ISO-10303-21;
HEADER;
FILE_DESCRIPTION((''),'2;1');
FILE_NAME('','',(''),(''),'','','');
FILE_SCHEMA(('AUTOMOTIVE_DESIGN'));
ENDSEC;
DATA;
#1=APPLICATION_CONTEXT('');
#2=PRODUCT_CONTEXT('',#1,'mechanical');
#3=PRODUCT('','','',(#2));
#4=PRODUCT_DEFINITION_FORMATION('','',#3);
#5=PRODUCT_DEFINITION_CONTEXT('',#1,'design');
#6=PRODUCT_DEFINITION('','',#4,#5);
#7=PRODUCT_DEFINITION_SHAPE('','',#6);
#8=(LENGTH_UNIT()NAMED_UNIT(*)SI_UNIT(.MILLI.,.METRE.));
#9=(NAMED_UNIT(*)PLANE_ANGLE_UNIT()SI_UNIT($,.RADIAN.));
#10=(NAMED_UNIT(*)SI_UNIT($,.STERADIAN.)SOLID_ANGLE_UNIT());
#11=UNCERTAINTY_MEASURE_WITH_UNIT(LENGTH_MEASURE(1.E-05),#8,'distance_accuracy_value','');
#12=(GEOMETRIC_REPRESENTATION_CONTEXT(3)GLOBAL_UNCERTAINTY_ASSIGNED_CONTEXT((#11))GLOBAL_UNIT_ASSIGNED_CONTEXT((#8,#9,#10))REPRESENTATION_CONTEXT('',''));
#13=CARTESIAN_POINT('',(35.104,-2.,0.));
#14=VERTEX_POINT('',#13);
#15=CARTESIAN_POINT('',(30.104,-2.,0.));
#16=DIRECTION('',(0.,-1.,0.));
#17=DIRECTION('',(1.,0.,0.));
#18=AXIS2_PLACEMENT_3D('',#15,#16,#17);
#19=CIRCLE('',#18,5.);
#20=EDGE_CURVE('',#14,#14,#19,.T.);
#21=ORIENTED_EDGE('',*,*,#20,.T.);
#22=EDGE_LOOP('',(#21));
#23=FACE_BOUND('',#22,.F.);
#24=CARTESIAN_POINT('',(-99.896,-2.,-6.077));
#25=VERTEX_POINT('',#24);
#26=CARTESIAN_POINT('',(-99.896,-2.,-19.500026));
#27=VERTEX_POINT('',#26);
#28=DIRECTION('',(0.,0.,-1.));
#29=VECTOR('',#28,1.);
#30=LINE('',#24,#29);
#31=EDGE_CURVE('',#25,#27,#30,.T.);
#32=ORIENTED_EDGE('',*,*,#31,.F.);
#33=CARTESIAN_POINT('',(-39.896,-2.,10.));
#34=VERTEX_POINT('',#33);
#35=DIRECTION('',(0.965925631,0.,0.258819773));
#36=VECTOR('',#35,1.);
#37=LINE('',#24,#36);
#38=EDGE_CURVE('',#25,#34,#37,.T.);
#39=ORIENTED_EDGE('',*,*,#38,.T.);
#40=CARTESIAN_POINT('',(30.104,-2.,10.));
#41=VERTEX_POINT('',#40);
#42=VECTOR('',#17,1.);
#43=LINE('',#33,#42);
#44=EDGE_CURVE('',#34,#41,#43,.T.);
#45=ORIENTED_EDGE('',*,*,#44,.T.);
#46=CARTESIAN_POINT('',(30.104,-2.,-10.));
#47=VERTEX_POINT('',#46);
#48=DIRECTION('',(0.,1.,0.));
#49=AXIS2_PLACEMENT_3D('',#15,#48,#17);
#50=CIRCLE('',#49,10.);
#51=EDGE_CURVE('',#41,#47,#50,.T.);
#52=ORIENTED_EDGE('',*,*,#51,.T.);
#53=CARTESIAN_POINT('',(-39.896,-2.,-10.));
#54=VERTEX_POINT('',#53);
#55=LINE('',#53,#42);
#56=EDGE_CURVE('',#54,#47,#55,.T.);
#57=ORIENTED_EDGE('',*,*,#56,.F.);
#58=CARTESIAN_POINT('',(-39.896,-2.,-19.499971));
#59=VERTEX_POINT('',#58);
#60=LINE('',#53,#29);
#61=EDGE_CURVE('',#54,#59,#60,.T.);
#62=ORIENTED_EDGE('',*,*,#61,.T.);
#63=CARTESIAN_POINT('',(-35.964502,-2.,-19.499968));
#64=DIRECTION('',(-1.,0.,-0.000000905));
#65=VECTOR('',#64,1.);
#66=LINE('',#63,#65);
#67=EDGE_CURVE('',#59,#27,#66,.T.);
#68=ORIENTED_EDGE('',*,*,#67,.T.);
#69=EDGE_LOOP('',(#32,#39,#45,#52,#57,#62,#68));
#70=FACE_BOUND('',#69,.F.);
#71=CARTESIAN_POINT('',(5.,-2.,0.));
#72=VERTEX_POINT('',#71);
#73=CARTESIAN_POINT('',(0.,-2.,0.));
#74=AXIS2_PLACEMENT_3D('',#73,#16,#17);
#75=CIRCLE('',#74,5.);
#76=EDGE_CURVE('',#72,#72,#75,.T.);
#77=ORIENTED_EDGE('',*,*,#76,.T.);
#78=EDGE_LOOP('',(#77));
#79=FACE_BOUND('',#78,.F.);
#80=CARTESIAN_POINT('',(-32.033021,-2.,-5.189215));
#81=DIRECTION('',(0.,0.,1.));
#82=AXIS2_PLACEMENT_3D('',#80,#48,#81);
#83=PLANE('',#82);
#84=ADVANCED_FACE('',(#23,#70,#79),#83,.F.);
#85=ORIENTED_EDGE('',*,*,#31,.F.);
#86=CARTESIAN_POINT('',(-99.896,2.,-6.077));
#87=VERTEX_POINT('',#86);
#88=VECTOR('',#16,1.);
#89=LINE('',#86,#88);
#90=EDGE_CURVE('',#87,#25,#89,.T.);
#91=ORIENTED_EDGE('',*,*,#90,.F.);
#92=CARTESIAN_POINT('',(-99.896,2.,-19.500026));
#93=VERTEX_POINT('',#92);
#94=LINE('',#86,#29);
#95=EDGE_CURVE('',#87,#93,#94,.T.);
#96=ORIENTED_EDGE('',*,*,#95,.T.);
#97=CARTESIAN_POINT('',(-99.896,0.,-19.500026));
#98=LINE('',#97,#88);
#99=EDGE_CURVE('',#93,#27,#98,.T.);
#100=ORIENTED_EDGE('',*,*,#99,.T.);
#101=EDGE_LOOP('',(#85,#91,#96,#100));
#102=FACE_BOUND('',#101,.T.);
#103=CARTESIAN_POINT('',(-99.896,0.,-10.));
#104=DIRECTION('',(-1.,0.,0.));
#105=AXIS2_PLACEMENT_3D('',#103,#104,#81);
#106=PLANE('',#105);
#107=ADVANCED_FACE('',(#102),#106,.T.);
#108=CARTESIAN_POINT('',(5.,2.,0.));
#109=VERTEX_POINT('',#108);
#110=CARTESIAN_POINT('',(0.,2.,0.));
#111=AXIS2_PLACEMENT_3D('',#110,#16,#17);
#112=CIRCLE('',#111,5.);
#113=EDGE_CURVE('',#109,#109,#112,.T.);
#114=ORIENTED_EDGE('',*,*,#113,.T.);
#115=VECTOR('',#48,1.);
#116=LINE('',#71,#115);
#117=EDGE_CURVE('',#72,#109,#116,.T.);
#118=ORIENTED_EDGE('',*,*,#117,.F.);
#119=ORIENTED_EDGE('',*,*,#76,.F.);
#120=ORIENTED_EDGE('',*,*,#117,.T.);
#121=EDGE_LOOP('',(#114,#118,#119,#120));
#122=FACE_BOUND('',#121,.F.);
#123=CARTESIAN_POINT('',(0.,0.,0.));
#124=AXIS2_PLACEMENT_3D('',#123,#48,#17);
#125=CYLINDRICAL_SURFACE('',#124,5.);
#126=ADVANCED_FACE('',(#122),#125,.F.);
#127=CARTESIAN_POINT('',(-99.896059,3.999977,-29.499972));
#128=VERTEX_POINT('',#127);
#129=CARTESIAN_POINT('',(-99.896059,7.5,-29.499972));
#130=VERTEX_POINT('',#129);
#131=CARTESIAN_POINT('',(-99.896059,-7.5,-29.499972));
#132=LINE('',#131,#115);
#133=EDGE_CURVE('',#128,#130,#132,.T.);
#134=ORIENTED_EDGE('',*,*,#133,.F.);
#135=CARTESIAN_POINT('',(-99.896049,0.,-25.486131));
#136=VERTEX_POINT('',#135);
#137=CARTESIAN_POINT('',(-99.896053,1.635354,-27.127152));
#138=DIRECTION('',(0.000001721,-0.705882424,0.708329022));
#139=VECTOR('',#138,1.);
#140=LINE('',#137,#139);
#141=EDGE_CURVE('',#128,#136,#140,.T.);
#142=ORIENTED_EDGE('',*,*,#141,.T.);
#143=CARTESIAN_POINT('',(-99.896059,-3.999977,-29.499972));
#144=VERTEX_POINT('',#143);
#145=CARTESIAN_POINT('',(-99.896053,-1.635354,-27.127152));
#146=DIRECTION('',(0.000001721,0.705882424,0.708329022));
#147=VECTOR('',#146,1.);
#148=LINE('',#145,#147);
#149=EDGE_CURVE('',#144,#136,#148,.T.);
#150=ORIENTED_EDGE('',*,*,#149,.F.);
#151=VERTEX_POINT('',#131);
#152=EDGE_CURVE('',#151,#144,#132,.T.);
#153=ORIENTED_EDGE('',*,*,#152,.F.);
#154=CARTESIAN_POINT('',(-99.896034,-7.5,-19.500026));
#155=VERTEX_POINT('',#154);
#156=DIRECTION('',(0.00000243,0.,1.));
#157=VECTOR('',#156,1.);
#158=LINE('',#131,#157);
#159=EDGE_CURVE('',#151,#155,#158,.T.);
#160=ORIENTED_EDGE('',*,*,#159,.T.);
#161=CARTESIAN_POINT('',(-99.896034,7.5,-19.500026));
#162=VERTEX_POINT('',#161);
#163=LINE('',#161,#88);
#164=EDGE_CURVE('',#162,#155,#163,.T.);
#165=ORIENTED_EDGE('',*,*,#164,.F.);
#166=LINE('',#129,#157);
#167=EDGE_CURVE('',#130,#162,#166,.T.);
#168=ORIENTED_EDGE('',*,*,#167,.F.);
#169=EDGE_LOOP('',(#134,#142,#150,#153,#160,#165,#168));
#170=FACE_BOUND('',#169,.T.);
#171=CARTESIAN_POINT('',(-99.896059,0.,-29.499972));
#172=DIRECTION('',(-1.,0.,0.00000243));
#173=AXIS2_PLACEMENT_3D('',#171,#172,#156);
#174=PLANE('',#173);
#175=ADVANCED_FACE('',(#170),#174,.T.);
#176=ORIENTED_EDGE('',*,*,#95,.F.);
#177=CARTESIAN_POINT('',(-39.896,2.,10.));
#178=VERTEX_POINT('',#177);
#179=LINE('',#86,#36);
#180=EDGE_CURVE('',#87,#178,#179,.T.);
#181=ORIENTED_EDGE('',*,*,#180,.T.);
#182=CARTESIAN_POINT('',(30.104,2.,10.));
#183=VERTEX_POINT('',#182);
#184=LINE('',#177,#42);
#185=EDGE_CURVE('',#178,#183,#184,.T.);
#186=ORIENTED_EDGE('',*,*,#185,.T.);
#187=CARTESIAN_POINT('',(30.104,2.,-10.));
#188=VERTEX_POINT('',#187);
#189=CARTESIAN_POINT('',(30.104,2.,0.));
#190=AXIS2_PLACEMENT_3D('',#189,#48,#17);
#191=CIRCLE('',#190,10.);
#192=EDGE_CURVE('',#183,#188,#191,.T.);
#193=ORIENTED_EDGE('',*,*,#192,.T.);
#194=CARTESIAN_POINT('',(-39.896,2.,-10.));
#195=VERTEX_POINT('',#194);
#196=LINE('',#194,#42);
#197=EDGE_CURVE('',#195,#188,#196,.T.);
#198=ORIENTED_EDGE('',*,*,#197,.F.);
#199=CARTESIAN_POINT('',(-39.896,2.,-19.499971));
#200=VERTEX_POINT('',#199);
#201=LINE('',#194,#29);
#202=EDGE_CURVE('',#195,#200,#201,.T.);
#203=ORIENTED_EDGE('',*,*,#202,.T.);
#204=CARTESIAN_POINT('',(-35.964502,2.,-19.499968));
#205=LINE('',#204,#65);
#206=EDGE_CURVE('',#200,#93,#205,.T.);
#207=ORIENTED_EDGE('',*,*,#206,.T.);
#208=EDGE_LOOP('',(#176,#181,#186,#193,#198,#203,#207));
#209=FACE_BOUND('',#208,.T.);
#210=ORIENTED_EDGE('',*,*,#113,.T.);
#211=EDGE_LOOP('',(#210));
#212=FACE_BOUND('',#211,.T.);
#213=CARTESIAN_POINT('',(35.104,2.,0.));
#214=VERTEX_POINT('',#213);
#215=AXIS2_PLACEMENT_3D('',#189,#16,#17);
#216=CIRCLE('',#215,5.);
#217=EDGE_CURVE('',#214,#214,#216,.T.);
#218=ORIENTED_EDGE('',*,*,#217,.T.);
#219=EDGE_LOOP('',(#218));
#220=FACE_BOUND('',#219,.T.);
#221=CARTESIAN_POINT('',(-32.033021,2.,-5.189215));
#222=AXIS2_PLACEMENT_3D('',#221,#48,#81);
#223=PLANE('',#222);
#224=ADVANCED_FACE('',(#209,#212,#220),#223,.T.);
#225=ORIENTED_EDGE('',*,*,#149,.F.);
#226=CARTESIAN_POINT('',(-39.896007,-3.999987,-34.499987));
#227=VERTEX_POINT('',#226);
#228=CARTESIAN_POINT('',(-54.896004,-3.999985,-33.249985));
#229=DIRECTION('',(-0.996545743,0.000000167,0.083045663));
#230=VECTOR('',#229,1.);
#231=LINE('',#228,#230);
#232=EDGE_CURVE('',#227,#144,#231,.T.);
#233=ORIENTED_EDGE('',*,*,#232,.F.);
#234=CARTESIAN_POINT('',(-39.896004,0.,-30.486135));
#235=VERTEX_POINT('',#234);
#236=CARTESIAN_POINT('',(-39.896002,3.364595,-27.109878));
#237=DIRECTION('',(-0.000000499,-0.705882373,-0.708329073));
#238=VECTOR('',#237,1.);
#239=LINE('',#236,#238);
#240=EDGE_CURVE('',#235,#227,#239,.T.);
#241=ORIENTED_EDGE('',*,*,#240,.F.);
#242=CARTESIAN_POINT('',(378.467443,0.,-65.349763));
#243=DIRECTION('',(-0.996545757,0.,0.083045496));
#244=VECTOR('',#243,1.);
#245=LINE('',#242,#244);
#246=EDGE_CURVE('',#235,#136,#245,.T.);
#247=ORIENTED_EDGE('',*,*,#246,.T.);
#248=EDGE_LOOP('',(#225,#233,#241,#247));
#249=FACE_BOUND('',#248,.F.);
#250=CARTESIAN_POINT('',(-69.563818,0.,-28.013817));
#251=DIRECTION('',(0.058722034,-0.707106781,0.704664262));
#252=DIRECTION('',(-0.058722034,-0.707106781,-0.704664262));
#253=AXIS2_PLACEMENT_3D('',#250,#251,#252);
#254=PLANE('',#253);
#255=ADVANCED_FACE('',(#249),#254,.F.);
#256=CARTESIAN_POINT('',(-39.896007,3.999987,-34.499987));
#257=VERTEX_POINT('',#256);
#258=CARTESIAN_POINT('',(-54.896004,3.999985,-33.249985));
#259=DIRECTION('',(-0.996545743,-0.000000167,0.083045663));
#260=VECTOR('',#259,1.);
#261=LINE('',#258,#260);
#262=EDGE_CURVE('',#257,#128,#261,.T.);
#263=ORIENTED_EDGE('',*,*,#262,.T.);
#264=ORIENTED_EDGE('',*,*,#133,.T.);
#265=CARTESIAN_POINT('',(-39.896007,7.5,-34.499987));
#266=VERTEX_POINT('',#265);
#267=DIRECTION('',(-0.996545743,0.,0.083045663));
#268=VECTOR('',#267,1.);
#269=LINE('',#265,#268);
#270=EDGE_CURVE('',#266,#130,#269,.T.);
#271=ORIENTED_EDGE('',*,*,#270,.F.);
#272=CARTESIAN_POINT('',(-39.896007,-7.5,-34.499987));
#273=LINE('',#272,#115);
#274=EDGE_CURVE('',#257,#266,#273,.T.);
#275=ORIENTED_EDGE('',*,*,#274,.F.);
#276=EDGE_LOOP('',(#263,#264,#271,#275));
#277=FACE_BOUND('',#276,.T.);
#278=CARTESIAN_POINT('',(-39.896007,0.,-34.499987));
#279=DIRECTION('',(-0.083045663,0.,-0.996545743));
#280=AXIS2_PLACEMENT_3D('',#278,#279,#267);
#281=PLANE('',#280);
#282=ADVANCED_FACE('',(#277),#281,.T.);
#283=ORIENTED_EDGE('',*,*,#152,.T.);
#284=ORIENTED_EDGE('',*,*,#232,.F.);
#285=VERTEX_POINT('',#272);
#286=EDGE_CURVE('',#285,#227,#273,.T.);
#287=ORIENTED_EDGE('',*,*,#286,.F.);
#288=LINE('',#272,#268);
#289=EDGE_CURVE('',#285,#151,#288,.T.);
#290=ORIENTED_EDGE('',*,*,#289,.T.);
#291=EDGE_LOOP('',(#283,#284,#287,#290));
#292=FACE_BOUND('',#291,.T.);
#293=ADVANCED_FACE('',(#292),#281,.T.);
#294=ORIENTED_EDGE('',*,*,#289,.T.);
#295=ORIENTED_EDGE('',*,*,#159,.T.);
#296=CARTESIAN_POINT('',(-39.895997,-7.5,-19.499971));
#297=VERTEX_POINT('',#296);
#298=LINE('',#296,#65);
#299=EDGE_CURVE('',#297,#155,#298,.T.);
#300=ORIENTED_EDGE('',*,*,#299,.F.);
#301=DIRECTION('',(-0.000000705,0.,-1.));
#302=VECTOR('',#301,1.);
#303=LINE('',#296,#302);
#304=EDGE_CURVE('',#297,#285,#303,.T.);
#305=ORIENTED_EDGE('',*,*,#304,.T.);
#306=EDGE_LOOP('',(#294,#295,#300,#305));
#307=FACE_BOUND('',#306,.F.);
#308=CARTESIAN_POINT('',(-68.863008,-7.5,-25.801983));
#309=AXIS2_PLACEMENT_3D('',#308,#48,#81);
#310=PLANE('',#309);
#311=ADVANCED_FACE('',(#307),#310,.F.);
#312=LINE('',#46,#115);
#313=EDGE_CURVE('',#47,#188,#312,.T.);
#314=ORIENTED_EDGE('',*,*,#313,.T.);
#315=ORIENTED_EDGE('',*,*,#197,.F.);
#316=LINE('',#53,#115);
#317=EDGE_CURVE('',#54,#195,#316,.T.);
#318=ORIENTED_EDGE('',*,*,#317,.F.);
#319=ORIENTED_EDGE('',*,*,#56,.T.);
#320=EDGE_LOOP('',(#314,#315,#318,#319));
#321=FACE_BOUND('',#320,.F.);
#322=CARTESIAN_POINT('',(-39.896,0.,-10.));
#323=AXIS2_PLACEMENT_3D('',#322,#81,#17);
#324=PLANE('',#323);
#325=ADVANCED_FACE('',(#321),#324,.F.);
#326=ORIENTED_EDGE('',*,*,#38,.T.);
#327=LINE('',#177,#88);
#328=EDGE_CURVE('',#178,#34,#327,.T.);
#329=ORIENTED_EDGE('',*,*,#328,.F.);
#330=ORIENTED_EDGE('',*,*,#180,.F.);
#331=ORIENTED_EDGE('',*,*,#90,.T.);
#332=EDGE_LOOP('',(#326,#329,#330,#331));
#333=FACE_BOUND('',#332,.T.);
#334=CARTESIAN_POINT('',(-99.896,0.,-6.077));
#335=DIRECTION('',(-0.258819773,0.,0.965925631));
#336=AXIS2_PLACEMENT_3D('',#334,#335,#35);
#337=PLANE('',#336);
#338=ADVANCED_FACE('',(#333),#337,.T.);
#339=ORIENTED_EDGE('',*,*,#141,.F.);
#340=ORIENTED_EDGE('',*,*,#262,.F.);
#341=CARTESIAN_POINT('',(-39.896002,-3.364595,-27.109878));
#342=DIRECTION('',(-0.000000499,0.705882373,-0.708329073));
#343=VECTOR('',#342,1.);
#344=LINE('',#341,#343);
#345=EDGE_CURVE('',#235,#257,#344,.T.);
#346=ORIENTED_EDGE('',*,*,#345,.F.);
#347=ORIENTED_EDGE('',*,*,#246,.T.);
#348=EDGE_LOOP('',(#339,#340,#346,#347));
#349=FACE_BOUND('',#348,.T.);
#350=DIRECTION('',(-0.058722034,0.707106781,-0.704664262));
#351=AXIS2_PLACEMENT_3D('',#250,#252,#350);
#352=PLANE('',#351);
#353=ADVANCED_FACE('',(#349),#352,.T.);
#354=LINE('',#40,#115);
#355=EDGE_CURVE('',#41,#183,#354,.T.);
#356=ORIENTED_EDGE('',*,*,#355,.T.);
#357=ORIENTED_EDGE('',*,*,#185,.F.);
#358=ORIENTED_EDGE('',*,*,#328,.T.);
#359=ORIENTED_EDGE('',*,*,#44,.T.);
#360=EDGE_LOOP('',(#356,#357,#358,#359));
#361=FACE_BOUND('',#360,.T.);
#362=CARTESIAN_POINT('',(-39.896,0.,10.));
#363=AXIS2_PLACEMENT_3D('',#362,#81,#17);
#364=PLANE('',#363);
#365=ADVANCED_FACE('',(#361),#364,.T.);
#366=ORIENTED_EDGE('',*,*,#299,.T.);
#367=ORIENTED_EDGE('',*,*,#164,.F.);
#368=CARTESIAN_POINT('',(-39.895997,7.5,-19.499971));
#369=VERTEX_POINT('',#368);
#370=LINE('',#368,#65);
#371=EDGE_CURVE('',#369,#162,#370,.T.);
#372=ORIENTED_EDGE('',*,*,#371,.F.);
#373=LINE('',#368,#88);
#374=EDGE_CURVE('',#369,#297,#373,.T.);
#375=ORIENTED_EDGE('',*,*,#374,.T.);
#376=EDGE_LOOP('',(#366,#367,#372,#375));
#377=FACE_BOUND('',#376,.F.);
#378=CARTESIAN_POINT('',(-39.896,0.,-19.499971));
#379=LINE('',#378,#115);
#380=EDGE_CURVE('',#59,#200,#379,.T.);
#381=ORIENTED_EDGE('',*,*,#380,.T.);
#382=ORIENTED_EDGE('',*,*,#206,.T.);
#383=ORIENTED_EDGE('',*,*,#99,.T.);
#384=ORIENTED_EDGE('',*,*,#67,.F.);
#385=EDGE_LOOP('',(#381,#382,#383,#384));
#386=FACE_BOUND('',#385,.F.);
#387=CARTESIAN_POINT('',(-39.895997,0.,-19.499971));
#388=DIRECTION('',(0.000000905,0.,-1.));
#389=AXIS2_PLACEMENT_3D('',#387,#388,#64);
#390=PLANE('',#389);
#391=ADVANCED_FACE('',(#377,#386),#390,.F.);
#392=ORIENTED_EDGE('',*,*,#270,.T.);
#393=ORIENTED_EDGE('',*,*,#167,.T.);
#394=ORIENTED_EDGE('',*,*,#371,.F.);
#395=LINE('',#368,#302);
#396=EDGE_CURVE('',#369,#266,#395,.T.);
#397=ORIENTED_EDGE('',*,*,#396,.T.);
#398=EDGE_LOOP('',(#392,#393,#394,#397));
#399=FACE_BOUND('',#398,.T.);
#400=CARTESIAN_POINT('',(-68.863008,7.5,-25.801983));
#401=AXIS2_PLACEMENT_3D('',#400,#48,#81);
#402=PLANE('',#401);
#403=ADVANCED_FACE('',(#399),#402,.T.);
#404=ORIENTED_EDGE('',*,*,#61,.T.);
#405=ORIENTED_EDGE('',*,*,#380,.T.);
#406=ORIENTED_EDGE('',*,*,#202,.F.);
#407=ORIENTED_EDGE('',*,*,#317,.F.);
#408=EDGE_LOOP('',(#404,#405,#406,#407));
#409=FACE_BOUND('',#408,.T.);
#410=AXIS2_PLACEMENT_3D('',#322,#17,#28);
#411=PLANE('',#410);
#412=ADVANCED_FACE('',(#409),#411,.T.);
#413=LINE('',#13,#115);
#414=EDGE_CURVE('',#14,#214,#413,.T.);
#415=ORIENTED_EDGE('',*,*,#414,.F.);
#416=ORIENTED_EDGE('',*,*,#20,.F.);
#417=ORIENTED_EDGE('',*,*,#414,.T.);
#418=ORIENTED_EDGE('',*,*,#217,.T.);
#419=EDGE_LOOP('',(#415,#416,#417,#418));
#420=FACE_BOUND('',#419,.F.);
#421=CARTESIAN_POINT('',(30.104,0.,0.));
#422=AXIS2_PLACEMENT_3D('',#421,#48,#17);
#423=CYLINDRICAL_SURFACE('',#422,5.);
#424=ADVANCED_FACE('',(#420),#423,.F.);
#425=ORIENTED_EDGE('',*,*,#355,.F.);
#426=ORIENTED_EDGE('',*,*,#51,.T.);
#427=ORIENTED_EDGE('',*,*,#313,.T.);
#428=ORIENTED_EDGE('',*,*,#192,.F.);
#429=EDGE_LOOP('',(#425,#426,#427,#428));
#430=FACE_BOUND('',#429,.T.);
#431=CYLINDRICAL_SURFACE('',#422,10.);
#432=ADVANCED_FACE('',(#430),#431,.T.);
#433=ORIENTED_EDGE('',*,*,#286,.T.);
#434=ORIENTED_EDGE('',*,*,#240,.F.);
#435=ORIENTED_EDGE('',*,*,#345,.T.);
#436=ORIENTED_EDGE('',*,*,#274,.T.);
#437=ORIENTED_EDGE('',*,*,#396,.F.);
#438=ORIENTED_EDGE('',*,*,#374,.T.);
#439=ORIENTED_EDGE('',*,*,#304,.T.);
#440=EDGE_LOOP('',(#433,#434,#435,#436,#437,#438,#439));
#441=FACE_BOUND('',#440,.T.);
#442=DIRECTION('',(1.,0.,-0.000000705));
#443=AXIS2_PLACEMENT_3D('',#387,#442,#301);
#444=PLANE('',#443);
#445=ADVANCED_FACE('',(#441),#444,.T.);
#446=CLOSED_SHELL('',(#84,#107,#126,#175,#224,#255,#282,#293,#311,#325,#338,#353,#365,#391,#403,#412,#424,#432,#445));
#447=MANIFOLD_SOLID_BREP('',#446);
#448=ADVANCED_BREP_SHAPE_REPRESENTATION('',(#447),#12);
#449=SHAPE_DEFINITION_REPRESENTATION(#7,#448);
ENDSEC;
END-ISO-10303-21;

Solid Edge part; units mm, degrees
sketch "Sketch1" plane through (0, 0, 0) normal (0, -1, 0) x (1, 0, 0)
  line L0 (-39.896, 10) -> (30.104, 10)
  line L1 (-39.896, -10) -> (30.104, -10)
  line L2 (-39.896, -10) -> (-39.896, -22.5)
  line L3 (-99.896, -22.5) -> (-39.896, -22.5)
  line L4 (-99.896, -10) -> (-99.896, -22.5)
  line L5 (-99.896, -10) -> (-99.896, -6.077)
  line L6 (-99.896, -6.077) -> (-39.896, 10)
  arc A0 (30.104, 10) -> (30.104, -10) centre (30.104, 0) cw
  circle A1 centre (30.104, 0) radius 5
  circle A2 centre (0, 0) radius 5
  dimension "D1" = 10
  dimension "D2" = 30.104
  dimension "D3" = 10
  dimension "D4" = 70
  dimension "D5" = 70
  dimension "D6" = 12.5
  dimension "D7" = 60
  dimension "D8" = 16.423
extrude "Protrusion1" add sketch "Sketch1" along normal mid plane 4
sketch "Sketch2" plane through (-29.896, 0, -6.25) normal (0, -1, 0) x (-0.9659258, 0, -0.258819)
  line L0 (13.0886, 10.2103) -> (16.9709, 24.6992)
  line L1 (16.9709, 24.6992) -> (73.6324, 4.3404)
  line L2 (73.6324, 4.3404) -> (71.0442, -5.3188)
  line L3 (13.0886, 10.2103) -> (71.0442, -5.3188)
extrude "ProtrusiónExtruida_3" add sketch "Sketch2" along normal mid plane 15
sketch "Sketch3" plane through (-69.896, -7.5, -32) normal (-0.9965458, 0, 0.0830455) x (0, -1, 0)
  line L0 (-7.5, 4) -> (-3.5, 0)
  line L1 (-3.5, 0) -> (-11.5, 0)
  line L2 (-7.5, 4) -> (-11.5, 0)
  dimension "D1" = 4
  dimension "D2" = 8
extrude "Cutout1" cut sketch "Sketch3" along normal through all and the other way through all
properties part number "1976-1500-005" material "Aluminio, 7075-T6"
